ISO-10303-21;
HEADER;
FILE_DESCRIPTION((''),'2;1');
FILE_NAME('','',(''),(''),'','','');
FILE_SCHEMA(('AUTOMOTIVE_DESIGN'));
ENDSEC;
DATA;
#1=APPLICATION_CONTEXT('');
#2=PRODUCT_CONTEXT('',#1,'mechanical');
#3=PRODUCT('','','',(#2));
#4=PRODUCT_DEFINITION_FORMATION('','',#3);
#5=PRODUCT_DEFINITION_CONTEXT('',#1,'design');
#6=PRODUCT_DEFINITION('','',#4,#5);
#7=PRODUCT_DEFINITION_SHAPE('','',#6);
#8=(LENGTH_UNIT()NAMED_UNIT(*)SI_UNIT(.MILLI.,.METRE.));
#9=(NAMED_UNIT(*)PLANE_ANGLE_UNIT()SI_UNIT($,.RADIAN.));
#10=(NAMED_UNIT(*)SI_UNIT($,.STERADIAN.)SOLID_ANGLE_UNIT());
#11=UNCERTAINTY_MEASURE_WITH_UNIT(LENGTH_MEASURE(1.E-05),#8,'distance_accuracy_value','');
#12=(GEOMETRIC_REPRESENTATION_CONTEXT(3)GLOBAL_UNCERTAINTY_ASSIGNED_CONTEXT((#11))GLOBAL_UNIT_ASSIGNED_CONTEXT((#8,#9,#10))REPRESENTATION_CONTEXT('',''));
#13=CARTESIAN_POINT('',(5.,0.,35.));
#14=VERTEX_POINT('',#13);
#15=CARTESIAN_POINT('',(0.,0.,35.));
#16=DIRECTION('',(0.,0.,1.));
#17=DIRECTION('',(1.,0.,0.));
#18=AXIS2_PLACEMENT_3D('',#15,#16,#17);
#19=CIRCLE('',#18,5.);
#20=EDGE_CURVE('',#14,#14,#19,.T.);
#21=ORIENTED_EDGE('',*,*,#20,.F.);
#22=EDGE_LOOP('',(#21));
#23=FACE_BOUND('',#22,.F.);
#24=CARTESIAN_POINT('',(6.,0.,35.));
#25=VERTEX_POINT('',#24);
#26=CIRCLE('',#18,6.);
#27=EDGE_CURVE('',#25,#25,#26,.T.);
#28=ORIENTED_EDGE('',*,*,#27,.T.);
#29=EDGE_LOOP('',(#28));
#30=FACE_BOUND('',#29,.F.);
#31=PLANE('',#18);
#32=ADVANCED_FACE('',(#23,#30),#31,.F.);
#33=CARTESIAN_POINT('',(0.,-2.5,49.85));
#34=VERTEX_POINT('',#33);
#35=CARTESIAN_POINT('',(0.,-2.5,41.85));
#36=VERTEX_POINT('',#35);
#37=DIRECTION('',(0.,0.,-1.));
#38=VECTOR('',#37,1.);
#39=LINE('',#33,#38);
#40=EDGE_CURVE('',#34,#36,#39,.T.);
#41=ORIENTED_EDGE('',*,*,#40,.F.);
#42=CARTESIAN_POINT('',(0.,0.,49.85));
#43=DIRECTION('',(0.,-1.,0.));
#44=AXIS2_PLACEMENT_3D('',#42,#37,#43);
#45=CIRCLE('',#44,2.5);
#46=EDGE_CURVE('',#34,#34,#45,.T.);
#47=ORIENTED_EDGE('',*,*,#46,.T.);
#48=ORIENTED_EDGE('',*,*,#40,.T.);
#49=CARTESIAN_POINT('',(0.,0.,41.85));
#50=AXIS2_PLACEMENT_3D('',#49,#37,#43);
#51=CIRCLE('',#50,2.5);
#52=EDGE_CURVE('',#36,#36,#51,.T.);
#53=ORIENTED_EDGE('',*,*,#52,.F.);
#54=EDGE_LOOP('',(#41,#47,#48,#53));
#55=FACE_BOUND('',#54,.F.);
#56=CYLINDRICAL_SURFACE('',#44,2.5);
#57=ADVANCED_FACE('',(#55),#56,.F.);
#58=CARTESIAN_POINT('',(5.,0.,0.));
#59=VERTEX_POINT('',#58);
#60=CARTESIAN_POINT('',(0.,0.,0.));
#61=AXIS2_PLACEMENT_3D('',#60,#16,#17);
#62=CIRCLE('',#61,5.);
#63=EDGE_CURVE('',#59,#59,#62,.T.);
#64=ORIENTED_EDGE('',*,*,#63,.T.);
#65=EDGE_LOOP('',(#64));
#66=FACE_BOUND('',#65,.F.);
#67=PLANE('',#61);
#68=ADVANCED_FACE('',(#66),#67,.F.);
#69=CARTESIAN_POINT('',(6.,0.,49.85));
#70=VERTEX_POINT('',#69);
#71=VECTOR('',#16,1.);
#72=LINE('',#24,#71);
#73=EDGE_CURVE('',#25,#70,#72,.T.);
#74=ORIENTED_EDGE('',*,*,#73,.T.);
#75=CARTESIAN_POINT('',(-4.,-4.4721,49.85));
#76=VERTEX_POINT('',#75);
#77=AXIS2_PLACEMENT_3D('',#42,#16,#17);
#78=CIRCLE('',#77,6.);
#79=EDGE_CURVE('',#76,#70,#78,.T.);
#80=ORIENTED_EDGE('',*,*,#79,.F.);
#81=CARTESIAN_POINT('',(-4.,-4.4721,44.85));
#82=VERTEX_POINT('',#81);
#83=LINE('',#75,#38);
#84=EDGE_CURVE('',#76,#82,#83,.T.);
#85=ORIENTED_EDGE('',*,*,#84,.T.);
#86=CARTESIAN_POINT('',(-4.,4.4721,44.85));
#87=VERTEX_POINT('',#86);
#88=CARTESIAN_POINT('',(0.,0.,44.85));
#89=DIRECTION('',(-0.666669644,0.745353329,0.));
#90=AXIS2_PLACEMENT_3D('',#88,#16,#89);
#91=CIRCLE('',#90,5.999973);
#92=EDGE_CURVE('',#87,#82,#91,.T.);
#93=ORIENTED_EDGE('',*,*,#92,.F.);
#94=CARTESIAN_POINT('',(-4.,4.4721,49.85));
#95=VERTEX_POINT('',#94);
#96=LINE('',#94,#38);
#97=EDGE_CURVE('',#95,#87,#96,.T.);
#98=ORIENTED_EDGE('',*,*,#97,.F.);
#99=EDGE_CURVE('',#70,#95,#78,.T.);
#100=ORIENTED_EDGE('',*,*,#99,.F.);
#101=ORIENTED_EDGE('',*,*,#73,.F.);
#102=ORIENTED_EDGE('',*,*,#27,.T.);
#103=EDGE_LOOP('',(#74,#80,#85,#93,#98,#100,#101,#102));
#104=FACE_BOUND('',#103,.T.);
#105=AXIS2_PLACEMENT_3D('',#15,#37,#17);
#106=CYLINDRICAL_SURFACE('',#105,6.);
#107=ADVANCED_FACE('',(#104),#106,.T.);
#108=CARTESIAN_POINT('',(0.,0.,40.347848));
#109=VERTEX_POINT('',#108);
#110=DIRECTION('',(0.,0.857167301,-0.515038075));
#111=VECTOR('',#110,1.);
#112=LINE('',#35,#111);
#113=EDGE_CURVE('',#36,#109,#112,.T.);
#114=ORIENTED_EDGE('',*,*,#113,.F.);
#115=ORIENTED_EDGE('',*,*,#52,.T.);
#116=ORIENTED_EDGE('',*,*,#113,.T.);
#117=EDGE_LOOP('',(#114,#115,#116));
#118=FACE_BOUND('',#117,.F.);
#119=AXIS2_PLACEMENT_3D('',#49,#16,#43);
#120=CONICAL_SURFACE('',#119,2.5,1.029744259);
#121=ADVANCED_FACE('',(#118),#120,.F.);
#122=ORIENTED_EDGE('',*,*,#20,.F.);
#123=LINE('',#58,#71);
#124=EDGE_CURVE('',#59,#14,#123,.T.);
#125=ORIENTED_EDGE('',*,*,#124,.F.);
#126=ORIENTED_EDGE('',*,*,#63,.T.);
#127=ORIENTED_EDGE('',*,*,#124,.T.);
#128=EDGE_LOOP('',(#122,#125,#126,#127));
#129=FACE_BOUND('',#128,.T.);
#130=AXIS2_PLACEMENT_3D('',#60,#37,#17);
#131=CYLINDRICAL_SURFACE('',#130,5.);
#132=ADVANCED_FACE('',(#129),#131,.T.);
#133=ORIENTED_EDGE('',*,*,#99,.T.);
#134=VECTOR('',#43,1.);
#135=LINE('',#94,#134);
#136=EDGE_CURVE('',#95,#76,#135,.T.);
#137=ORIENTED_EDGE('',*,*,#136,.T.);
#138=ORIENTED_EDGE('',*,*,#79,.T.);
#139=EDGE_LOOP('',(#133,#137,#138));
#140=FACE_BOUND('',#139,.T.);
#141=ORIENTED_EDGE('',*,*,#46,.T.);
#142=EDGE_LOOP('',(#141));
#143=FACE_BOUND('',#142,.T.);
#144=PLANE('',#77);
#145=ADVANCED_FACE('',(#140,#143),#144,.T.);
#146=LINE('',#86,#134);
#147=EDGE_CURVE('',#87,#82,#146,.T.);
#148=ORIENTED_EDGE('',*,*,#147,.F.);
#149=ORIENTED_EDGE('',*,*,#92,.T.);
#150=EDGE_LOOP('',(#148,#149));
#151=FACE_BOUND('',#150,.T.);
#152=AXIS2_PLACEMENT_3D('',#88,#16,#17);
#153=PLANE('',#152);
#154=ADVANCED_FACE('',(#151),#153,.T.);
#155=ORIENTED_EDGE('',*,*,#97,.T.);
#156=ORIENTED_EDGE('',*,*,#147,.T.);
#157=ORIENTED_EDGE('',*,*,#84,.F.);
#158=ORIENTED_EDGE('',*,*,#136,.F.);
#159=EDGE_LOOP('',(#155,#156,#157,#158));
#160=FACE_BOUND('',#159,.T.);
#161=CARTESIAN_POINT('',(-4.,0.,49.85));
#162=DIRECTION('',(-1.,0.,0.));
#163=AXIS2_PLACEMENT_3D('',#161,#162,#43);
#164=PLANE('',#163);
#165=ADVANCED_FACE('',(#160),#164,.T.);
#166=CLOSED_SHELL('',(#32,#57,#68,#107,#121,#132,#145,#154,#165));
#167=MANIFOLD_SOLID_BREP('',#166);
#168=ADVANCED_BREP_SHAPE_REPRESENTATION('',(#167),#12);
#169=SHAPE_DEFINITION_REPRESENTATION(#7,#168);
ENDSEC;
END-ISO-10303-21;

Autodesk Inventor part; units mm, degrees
ref_plane "YZ Plane" through (0, 0, 0) normal (1, 0, 0) x (0, 1, 0)
ref_plane "XZ Plane" through (0, 0, 0) normal (0, 1, 0) x (-1, 0, 0)
sketch "スケッチ1" plane through (0, 0, 0) normal (0, 0, 1) x (1, 0, 0)
  point P0 (0, 0)
sketch "スケッチ2" plane through (0, 0, 0) normal (0, 0, 1) x (1, 0, 0)
  circle A0 centre (0, 0) radius 5
  dimension "d0" = 10
extrude "押し出し1" add sketch "スケッチ2" along normal blind 35
thread "ねじ1" size "M10x1.5" class "6g" standard "ANSI Metric M Profile" length 10
sketch "スケッチ3" plane through (0, 0, 35) normal (0, 0, 1) x (1, 0, 0)
  point P0 (0, 0)
sketch "スケッチ4" plane through (0, 0, 35) normal (0, 0, 1) x (1, 0, 0)
  circle A0 centre (0, 0) radius 6
  dimension "d5" = 12
extrude "押し出し2" add sketch "スケッチ4" along normal blind 14.85
sketch "スケッチ5" plane through (0, 0, 49.85) normal (0, 0, 1) x (1, 0, 0)
  line L0 (0, 0) -> (0, 6)
  circle A0 centre (0, 0) radius 6 projected
ref_plane "作業平面1" through (0, 6, 49.85) normal (0, 1, 0) x (-1, 0, 0)
sketch "スケッチ9" plane through (0, 0, 49.85) normal (0, 0, 1) x (1, 0, 0)
  point P0 (0, 0)
  point P1 (0, 0)
hole "穴2" at (0, 0, 49.85) direction (0, 0, -1) diameter 5 depth 8 tip angle 118
thread "ねじ3" size "M5x0.8" class "6H" standard "ANSI Metric M Profile" full length
sketch "スケッチ10" plane through (0, 0, 49.85) normal (0, 0, 1) x (1, 0, 0)
  arc A0 (-4, 4.4721) -> (-4, -4.4721) centre (0, 0) ccw
  line L0 (-4, 0) -> (-4, 4.4721)
  line L1 (-4, 0) -> (-4, -4.4721)
  dimension "d34" = 12
  dimension "d35" = 4
extrude "押し出し4" cut sketch "スケッチ10" against normal blind 5
properties part number "回転アーム付き計測輪シャフト"
